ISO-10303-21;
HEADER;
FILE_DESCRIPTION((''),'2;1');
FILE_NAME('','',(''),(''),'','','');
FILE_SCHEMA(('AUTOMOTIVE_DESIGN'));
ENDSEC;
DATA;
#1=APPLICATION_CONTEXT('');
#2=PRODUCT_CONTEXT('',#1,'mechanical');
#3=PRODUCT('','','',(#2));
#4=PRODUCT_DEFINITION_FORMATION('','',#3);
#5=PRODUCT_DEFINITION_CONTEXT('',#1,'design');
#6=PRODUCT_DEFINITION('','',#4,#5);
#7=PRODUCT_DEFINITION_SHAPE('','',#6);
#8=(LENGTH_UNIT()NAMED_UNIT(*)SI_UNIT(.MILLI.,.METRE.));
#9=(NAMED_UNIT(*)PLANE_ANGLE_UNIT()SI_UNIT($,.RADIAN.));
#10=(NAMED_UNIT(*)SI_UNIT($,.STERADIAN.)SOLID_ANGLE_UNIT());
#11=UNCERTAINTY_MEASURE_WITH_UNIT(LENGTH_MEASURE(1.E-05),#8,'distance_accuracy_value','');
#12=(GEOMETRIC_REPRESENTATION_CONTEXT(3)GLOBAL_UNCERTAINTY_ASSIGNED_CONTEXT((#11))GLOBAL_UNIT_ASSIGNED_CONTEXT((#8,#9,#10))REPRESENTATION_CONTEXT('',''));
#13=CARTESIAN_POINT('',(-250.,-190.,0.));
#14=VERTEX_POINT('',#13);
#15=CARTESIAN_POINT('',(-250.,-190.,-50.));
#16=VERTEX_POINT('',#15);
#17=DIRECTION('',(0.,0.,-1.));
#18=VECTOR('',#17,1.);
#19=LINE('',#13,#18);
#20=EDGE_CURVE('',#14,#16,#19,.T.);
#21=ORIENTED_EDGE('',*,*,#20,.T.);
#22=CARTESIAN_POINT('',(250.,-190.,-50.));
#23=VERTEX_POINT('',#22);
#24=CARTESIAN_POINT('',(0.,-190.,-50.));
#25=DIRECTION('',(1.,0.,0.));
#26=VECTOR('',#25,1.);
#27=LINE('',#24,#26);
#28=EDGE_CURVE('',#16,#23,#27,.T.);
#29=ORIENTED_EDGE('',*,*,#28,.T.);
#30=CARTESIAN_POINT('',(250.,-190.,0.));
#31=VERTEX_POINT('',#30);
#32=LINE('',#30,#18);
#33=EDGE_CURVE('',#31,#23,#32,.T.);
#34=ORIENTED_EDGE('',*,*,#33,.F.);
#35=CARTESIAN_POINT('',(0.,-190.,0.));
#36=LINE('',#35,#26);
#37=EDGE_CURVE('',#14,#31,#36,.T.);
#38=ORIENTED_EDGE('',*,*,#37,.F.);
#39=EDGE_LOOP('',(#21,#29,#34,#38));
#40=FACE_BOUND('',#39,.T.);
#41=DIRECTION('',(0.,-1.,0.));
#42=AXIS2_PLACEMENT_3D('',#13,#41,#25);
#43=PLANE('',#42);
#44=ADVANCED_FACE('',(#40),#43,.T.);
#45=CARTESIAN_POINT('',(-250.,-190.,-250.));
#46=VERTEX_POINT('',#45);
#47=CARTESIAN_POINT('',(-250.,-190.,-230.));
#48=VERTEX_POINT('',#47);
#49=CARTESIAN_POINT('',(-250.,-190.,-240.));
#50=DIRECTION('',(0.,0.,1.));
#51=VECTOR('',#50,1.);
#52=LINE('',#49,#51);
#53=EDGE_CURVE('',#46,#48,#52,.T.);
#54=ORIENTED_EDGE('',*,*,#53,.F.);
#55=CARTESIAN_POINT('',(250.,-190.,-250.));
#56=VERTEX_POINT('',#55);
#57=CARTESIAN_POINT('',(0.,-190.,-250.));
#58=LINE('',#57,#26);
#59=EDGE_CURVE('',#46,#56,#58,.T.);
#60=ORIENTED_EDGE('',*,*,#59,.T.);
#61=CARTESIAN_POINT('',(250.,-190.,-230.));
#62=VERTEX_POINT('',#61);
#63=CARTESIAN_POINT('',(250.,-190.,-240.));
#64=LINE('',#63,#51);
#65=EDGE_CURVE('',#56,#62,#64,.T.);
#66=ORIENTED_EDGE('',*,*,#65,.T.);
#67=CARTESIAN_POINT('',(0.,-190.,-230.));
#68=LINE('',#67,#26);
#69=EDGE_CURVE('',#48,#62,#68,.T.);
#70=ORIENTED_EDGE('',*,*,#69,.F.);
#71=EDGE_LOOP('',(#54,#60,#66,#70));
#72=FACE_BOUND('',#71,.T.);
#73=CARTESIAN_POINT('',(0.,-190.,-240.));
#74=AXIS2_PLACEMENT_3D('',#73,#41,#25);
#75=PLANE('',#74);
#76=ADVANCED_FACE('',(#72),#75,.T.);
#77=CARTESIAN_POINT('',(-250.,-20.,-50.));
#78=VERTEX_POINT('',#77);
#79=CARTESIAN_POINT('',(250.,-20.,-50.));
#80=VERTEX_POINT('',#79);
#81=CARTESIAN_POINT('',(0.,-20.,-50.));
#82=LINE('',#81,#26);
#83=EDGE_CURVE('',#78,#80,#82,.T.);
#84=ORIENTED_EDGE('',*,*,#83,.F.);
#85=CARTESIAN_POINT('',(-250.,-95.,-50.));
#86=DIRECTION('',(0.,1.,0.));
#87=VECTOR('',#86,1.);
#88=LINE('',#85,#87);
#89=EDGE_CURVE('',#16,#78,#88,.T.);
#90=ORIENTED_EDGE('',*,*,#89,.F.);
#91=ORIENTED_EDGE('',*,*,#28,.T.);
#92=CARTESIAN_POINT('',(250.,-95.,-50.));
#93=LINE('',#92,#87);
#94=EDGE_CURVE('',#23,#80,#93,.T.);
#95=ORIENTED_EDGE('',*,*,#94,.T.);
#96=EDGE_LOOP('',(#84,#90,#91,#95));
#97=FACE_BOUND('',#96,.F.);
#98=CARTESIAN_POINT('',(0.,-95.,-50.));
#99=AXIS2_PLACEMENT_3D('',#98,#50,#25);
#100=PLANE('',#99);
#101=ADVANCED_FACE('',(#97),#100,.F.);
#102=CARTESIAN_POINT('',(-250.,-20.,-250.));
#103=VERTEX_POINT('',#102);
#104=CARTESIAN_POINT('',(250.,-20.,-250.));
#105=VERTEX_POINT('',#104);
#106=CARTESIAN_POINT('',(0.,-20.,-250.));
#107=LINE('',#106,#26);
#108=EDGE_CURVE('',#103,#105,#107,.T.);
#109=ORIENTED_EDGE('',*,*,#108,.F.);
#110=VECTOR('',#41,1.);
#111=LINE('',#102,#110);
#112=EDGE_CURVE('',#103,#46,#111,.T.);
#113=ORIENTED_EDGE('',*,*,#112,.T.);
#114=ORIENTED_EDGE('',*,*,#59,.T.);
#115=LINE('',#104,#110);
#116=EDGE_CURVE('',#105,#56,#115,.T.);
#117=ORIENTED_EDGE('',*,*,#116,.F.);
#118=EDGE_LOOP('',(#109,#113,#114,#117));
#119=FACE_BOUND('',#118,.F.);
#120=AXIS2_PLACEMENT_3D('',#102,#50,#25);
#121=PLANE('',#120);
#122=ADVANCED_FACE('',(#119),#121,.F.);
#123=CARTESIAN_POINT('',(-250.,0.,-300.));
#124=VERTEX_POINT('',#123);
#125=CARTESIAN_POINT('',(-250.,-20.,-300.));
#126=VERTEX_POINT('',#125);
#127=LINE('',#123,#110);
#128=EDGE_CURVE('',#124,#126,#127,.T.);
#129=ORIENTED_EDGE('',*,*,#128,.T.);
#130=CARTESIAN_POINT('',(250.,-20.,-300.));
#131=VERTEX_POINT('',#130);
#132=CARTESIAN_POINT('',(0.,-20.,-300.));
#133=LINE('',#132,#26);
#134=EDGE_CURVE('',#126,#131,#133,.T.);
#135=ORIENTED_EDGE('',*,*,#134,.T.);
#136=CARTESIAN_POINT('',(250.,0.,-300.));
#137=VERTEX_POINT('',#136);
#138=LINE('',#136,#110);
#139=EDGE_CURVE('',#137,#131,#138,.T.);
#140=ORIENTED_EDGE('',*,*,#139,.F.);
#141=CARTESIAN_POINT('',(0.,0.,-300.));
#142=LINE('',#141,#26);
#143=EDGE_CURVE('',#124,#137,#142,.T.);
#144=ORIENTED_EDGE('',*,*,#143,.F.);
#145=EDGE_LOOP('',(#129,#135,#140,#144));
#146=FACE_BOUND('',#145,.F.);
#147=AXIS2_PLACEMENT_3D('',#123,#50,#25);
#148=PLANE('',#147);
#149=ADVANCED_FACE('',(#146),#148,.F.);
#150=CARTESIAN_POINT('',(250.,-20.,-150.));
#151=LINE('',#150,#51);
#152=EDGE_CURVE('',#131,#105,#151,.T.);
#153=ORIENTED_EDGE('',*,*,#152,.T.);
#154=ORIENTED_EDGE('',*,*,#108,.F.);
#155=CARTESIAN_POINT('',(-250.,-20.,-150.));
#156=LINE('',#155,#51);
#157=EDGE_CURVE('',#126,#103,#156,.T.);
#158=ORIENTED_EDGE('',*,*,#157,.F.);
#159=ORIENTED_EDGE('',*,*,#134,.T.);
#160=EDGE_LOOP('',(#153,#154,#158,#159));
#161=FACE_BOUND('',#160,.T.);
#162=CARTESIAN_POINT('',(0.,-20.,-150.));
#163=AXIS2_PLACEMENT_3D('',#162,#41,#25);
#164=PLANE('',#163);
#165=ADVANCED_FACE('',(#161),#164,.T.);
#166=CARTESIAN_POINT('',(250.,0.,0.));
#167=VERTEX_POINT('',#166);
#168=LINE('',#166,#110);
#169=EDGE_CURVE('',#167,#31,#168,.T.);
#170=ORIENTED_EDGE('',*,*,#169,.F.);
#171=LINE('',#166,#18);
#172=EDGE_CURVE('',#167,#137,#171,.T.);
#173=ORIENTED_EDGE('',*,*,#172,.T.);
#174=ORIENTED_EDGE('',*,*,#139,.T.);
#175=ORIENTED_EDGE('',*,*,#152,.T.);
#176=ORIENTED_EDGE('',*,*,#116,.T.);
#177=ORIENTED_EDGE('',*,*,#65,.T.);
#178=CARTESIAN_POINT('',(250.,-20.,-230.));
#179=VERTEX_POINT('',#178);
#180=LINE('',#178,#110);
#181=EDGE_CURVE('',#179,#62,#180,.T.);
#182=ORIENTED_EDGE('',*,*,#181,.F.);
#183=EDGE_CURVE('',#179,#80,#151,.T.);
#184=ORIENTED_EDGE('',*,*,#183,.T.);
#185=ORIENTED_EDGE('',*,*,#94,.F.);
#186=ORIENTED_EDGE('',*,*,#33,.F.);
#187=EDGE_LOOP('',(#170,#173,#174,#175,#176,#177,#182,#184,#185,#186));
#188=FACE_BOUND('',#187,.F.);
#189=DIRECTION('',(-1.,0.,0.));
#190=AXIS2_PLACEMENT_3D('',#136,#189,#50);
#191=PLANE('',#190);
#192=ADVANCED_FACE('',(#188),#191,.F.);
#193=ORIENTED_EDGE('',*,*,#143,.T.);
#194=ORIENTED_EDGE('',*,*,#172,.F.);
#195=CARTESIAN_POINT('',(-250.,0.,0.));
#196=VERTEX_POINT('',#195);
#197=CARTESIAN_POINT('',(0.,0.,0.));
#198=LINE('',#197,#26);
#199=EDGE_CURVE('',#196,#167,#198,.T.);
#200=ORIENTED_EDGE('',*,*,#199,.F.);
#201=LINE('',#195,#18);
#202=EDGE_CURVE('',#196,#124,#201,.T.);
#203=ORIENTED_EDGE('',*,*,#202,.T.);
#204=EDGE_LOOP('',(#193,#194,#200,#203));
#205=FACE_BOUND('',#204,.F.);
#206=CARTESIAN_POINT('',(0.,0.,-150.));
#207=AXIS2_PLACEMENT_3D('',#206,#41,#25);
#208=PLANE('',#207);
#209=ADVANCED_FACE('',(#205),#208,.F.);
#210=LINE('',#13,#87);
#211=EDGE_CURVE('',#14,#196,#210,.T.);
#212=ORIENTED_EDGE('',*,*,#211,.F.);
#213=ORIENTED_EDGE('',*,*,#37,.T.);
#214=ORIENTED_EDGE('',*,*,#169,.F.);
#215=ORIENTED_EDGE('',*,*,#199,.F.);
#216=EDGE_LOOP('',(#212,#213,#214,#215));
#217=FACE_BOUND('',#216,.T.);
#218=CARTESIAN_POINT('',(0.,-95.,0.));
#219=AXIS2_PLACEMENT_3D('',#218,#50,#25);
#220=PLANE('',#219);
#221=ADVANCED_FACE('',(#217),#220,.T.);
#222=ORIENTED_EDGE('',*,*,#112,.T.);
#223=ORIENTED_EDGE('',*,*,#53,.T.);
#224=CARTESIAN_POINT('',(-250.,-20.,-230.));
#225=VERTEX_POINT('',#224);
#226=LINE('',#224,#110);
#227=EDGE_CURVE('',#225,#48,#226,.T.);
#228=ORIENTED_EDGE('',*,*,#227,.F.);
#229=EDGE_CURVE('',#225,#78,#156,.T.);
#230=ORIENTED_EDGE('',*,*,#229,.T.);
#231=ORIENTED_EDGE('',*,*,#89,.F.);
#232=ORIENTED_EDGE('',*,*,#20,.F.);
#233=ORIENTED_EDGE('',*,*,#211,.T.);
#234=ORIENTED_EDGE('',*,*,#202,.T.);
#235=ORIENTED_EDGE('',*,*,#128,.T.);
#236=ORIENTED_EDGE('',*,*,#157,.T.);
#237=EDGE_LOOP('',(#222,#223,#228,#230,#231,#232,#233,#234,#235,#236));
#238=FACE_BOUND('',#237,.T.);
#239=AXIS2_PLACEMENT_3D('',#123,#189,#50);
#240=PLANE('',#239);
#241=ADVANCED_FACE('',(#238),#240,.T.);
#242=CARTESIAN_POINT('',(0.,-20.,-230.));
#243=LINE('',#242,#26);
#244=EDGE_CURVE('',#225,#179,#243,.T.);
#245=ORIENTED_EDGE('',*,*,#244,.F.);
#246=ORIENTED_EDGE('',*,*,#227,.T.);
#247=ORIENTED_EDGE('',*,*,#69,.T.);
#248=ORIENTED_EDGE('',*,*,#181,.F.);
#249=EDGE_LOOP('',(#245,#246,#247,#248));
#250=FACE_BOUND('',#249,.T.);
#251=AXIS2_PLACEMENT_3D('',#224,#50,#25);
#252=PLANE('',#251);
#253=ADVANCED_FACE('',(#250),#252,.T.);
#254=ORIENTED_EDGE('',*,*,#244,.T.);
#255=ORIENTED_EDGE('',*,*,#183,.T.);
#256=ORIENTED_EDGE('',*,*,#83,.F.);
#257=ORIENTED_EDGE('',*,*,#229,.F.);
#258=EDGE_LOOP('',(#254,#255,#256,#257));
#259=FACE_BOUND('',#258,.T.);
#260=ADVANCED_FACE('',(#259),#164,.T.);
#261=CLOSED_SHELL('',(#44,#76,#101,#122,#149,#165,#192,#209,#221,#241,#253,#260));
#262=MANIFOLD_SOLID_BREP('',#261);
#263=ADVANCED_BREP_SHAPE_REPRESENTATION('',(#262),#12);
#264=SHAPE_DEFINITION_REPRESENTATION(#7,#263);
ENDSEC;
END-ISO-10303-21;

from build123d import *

# Parameters (mm, degrees)
F0_W     = 500
F0_H     = 190
F1_DEPTH = 50
F2_W     = 500
F2_H     = 300
F3_DEPTH = 20
F4_W     = 500
F4_H     = 20
F5_DEPTH = 170


# Not quite as in the source:
# - the program builds the solid bodies; features that only make, move or delete a surface that nothing else refers to are left out


with BuildPart() as f1:
    # F0 (on Top) → F1 (new body)
    with BuildSketch(Plane.XY):
        with Locations((0, -95)):
            Rectangle(F0_W, F0_H)
    extrude(amount=-F1_DEPTH)

    # F2 (on Front) → F3 (join)
    with BuildSketch(Plane.XZ):
        with Locations((0, -150)):
            Rectangle(F2_W, F2_H)
    extrude(amount=F3_DEPTH)

    # F4 (on face) → F5 (join)
    with BuildSketch(Plane.XZ.offset(20)):
        with Locations((0, -240)):
            Rectangle(F4_W, F4_H)
    extrude(amount=F5_DEPTH)


solid = f1.part
